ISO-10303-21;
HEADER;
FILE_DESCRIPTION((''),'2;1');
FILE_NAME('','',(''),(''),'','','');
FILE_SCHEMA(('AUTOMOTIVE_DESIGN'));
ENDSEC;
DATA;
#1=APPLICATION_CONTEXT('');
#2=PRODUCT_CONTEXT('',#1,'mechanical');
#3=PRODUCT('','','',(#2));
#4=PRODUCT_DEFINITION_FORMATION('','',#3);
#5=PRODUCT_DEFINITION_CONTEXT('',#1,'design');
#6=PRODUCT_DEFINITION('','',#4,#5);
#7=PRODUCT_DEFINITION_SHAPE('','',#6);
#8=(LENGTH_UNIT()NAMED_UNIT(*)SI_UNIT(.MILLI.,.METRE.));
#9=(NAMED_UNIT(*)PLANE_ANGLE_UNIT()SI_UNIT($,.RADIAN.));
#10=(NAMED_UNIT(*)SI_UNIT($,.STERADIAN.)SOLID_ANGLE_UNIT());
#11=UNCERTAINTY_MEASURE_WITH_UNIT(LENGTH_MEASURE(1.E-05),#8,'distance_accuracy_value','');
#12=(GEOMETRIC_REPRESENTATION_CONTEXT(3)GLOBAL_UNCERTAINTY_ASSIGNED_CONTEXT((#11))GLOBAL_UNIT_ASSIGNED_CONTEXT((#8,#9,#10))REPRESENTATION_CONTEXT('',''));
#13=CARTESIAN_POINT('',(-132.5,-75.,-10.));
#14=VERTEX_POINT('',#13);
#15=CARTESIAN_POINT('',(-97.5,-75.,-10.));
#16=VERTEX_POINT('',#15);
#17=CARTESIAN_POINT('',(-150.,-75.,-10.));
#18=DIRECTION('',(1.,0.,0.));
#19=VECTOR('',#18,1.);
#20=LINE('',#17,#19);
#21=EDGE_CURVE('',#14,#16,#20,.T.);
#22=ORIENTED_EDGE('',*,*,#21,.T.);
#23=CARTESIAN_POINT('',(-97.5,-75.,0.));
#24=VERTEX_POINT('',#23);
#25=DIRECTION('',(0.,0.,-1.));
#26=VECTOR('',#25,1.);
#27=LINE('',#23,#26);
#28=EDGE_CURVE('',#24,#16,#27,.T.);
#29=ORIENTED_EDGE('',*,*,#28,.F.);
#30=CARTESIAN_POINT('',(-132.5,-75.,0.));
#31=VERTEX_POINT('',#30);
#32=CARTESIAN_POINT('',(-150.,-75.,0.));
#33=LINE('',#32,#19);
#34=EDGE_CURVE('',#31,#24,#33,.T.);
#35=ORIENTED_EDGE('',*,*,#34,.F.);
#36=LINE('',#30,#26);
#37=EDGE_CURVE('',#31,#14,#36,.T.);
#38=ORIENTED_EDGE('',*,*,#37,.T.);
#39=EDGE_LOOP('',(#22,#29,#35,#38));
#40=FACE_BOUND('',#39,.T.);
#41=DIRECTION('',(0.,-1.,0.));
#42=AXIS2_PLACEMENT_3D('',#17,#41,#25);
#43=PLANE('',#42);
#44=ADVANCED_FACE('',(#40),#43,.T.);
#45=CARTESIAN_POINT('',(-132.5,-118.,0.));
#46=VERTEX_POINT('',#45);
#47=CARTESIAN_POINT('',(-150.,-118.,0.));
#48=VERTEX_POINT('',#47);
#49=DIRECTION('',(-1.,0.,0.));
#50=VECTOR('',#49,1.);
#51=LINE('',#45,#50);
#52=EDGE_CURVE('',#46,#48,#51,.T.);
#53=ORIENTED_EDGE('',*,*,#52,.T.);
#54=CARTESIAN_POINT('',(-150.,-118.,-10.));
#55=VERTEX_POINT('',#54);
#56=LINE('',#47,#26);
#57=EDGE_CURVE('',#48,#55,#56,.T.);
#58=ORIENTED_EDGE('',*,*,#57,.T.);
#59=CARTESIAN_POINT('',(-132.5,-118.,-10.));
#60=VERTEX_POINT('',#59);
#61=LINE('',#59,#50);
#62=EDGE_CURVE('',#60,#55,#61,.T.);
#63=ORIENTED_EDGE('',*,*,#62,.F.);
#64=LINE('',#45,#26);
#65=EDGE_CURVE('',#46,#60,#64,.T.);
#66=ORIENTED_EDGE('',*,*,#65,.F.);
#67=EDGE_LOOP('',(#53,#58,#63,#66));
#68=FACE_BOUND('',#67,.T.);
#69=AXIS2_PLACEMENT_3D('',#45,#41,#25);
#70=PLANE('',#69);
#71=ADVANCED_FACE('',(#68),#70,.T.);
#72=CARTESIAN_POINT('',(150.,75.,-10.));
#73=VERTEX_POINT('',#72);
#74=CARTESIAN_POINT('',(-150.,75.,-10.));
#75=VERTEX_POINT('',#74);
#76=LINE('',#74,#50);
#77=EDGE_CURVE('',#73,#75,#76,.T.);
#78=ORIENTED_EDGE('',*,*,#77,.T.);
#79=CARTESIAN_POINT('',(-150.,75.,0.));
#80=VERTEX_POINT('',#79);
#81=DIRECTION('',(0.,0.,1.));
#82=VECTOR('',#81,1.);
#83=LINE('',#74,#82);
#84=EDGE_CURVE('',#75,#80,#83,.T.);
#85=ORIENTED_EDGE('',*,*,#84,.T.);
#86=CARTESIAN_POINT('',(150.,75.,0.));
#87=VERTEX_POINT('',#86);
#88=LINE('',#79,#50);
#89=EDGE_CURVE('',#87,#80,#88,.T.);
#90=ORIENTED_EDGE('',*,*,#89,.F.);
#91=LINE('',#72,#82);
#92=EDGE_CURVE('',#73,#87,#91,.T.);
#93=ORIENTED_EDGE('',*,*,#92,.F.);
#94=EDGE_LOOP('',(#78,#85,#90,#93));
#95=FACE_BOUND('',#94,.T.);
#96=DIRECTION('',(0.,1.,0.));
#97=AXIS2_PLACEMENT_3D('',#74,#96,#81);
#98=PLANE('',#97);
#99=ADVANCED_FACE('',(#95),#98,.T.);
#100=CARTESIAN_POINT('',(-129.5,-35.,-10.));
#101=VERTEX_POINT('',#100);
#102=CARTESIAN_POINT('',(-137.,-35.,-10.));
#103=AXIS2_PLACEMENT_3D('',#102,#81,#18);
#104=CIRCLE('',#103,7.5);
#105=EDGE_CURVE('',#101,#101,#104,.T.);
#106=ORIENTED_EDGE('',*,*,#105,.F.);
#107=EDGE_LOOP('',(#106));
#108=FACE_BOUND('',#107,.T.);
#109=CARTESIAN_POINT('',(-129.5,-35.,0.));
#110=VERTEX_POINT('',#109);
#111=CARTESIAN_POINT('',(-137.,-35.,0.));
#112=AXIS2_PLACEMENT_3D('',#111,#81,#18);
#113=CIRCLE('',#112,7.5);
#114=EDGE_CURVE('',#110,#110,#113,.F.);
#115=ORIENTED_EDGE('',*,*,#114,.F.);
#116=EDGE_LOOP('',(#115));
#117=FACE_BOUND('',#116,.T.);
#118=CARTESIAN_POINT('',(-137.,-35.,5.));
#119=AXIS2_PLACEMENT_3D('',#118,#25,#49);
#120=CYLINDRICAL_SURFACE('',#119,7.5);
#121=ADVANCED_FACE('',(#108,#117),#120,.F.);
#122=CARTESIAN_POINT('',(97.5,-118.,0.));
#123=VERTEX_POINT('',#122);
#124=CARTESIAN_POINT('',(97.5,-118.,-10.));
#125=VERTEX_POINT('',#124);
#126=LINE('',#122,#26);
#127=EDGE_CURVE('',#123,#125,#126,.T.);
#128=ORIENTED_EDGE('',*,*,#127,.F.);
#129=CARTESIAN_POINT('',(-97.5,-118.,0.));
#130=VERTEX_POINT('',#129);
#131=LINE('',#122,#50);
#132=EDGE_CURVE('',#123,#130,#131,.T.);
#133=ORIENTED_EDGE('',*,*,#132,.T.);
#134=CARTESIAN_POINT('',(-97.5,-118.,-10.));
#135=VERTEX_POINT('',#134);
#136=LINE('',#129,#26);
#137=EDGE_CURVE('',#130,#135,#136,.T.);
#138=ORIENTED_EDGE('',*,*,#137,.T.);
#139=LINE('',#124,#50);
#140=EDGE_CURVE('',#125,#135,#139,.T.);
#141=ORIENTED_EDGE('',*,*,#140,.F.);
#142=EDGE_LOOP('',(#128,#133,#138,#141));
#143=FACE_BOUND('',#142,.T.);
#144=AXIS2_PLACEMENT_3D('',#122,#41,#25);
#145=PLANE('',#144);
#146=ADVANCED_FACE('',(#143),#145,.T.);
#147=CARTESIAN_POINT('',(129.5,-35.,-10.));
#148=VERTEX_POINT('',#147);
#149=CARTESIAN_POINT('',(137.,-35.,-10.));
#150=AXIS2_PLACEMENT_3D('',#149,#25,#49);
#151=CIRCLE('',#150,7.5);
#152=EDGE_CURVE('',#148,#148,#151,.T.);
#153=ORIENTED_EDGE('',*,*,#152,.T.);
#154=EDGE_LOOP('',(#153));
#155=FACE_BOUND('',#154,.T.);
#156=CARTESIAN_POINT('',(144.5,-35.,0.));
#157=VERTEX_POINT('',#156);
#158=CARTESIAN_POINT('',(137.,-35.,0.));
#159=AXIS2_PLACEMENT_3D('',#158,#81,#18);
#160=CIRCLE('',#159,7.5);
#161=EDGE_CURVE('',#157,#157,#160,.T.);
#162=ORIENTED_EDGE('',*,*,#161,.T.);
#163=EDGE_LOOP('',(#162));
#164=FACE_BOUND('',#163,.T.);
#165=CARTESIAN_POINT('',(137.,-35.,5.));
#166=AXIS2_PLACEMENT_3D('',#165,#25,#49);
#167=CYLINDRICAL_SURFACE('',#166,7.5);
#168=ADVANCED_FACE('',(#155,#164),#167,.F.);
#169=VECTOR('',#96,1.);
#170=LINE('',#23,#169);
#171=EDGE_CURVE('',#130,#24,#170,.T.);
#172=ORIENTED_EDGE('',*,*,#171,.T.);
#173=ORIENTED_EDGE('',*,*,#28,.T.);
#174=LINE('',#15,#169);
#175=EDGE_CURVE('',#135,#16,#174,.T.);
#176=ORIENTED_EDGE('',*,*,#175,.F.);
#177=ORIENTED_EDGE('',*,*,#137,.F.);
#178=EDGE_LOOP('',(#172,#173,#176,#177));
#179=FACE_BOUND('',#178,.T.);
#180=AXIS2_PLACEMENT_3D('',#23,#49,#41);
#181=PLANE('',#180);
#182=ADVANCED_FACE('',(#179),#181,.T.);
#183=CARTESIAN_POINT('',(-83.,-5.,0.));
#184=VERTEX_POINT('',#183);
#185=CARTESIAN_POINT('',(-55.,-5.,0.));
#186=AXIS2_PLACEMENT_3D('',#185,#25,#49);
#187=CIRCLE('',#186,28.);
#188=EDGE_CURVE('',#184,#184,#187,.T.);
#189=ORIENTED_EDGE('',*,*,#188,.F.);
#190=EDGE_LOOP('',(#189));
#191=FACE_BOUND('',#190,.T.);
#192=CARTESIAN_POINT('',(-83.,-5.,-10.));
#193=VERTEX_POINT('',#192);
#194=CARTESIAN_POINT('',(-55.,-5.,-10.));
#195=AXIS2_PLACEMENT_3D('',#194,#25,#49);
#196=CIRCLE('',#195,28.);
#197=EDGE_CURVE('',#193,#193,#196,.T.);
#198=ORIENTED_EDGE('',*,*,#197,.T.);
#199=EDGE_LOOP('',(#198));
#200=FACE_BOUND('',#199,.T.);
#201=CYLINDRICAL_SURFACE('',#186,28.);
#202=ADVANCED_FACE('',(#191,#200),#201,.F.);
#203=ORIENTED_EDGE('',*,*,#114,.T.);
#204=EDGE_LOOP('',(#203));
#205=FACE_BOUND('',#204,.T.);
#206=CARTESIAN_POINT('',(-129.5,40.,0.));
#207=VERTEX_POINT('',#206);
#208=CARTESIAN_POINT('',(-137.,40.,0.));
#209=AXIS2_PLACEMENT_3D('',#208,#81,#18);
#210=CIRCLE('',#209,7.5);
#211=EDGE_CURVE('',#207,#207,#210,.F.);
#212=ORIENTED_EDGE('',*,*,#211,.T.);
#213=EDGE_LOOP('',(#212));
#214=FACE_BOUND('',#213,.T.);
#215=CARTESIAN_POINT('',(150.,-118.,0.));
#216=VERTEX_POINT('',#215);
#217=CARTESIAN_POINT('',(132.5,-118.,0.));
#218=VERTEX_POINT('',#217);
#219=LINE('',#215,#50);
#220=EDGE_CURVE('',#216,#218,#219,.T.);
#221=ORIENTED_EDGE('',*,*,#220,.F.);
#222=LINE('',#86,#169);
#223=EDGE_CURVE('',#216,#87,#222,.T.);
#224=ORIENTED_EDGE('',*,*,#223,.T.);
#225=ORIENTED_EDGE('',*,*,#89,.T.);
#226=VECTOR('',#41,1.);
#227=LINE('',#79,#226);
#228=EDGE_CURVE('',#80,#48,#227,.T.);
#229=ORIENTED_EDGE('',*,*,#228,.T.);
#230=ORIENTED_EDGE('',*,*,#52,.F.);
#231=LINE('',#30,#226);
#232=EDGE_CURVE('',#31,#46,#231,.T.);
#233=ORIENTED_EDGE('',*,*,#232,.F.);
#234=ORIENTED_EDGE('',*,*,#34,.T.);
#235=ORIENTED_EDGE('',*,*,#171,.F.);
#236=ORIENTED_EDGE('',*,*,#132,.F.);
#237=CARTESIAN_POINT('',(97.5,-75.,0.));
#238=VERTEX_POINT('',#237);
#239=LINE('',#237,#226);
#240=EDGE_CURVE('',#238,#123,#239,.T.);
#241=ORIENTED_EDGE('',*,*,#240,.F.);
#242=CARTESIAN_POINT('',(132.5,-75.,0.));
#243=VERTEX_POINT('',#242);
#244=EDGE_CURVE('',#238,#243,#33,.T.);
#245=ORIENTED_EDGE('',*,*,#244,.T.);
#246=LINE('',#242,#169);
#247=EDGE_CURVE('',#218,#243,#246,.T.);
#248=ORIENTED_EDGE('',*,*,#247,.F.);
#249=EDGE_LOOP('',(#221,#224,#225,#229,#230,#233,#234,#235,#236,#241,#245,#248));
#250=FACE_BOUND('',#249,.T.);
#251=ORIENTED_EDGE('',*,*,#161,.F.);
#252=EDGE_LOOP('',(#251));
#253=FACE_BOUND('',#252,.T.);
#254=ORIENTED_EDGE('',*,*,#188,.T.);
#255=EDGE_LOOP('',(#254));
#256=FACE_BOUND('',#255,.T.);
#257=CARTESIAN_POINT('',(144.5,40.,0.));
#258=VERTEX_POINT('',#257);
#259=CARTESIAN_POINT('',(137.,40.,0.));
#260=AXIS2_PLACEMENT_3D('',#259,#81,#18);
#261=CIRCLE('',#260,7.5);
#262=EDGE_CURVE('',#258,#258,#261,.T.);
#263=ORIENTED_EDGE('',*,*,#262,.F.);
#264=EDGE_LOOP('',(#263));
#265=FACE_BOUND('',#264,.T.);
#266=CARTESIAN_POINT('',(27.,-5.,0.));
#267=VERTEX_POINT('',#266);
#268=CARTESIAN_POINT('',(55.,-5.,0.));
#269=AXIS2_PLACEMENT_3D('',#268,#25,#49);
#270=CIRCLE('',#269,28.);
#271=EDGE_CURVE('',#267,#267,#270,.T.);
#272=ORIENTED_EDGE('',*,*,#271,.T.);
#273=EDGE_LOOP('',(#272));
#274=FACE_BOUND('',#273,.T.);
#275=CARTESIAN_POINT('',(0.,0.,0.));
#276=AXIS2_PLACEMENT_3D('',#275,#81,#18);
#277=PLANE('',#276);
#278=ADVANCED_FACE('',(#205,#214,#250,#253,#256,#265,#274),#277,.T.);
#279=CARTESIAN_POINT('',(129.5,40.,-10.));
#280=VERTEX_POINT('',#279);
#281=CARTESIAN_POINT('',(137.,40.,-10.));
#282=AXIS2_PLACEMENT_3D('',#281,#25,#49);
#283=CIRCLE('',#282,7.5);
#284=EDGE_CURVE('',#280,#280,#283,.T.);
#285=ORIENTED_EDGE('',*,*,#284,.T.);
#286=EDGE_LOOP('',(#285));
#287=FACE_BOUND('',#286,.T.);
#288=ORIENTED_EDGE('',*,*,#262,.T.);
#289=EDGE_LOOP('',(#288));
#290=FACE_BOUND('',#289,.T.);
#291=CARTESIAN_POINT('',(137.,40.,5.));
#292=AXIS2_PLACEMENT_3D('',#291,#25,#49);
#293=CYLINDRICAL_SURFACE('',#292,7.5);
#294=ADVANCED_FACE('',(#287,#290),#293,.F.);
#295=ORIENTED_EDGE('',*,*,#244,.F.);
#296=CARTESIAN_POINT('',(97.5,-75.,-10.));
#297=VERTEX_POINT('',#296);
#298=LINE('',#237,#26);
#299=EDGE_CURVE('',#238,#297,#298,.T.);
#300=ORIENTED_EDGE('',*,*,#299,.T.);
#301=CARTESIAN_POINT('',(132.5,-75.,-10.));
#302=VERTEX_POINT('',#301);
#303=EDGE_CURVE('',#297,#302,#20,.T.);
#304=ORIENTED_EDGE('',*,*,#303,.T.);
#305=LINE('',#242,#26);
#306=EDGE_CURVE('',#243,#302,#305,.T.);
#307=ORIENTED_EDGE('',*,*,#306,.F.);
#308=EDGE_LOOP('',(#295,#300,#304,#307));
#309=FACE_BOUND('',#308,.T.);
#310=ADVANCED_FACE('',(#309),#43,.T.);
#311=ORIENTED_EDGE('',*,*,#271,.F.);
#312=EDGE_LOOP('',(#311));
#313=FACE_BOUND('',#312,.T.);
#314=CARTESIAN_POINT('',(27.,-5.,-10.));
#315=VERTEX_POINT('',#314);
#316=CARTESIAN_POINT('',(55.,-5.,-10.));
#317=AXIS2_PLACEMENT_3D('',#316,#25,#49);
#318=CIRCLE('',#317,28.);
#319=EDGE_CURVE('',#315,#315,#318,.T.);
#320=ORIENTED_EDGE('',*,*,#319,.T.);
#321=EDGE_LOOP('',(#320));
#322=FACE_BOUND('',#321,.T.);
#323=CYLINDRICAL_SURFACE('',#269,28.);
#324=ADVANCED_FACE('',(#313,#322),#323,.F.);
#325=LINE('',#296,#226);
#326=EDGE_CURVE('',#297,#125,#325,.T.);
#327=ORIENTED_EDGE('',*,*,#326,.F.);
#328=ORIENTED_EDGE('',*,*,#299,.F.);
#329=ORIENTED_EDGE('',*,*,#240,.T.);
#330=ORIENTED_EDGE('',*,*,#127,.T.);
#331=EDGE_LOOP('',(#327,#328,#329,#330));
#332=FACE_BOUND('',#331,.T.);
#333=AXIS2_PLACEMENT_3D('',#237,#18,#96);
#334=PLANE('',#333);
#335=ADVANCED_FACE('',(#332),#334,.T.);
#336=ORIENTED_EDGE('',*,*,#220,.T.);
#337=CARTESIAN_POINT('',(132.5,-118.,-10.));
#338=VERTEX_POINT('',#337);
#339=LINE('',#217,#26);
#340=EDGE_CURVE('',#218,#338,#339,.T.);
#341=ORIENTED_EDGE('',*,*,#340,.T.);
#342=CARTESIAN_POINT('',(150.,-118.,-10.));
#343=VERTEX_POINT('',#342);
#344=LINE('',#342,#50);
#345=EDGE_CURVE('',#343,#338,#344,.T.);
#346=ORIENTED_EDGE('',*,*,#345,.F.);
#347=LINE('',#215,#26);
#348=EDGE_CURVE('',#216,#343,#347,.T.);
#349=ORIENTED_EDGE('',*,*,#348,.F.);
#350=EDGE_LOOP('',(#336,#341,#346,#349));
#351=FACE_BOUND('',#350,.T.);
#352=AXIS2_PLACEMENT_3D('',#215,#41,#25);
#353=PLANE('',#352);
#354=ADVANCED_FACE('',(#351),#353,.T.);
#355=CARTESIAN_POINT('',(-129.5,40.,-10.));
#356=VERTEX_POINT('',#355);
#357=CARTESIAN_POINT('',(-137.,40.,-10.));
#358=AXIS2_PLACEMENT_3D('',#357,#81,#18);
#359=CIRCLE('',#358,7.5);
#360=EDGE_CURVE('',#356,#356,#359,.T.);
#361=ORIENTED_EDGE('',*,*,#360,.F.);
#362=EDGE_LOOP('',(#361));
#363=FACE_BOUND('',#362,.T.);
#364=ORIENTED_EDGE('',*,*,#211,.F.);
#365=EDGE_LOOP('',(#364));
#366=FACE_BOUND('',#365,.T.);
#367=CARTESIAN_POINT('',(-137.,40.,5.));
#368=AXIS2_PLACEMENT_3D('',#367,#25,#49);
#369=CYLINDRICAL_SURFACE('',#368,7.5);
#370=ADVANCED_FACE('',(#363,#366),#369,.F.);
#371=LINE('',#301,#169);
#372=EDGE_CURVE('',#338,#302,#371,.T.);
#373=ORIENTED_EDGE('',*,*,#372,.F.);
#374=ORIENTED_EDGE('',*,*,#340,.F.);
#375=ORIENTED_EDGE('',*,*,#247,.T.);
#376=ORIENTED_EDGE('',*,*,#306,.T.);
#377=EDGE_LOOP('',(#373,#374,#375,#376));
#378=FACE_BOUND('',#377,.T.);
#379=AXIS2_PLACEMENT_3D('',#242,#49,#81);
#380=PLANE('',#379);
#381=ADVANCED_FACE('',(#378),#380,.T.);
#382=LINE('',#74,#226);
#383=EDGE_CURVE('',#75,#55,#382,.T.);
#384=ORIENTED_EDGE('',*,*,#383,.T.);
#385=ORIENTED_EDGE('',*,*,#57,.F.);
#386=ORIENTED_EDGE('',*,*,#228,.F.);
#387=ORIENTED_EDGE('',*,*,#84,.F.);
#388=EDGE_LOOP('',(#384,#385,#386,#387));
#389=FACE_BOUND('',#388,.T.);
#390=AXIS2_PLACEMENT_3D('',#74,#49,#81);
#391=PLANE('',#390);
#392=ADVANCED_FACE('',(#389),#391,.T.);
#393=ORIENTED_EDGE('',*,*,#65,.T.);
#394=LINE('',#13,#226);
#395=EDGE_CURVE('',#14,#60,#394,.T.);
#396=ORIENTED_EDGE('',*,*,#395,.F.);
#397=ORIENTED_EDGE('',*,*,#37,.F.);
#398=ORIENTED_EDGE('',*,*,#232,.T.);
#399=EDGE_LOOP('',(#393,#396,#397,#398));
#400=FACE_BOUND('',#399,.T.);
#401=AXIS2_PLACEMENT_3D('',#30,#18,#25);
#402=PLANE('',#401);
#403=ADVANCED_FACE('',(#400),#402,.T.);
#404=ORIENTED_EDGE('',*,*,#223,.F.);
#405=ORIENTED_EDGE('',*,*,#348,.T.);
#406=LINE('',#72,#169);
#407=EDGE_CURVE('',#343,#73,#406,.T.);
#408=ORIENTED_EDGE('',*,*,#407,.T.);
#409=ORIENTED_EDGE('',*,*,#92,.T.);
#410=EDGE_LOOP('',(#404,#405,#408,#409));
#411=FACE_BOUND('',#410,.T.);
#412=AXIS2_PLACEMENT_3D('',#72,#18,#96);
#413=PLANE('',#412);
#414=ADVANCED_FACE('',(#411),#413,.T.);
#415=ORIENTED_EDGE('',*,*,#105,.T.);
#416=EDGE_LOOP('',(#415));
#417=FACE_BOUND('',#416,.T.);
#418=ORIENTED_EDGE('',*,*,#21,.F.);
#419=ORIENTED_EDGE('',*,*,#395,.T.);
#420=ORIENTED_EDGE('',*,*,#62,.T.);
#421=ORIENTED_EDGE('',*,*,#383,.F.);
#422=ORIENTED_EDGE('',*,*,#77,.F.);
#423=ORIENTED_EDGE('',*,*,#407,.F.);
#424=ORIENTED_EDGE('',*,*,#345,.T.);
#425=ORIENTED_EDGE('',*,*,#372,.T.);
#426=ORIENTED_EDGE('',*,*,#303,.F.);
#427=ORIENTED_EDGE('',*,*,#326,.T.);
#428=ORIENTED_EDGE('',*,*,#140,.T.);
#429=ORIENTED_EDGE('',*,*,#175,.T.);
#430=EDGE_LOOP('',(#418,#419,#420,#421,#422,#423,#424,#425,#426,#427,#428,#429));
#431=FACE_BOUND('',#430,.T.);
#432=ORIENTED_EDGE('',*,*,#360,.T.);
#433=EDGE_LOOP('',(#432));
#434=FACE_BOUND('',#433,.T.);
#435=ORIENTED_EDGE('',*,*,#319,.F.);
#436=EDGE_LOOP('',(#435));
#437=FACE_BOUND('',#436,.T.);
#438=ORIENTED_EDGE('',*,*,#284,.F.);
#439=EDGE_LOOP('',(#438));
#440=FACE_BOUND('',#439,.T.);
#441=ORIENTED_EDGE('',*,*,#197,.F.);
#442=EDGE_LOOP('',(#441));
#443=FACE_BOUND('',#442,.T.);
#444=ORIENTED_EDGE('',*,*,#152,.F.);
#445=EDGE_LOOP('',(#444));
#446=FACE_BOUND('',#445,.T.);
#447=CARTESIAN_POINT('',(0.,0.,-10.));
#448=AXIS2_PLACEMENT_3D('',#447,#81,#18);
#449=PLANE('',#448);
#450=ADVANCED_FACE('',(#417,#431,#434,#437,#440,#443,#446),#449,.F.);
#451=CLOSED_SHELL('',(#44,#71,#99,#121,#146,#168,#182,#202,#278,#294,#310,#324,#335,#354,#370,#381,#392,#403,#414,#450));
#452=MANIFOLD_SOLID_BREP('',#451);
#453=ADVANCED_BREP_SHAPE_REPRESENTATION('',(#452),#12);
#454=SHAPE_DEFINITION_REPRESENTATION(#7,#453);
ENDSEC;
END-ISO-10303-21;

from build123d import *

# Parameters (mm, degrees)
IZIM1_W               = 300
IZIM1_H               = 150
TABAN_FLAN_1_DEPTH    = 10
IZIM6_R               = 28
KES_EKSTR_ZYON1_DEPTH = 10
IZIM7_R               = 7.5
KES_EKSTR_ZYON2_DEPTH = 15
IZIM8_W               = 17.5
IZIM8_H               = 43
IZIM8_W_2             = 195
SEKME1_DEPTH          = 10


# Sheet-metal steps are written as plain solids
with BuildPart() as part:
    # Çizim1 → Taban-Flanş1 (new body)
    with BuildSketch(Plane.XY):
        Rectangle(IZIM1_W, IZIM1_H)
    extrude(amount=-TABAN_FLAN_1_DEPTH)

    # Çizim6 → Kes-Ekstrüzyon1 (cut)
    with BuildSketch(Plane(origin=(0, 0, -10), x_dir=(-1, 0, 0), z_dir=(0, 0, -1))):
        with Locations((-55, -5)):
            Circle(IZIM6_R)
        with Locations((55, -5)):
            Circle(IZIM6_R)
    extrude(amount=-KES_EKSTR_ZYON1_DEPTH, mode=Mode.SUBTRACT)

    # Çizim7 → Kes-Ekstrüzyon2 (cut)
    with BuildSketch(Plane(origin=(0, 0, -10), x_dir=(-1, 0, 0), z_dir=(0, 0, -1))):
        with Locations((-137, 40)):
            Circle(IZIM7_R)
        with Locations((-137, -35)):
            Circle(IZIM7_R)
    kes_ekstr_zyon2 = extrude(amount=-KES_EKSTR_ZYON2_DEPTH, mode=Mode.SUBTRACT)

    # Aynalama1: Kes-Ekstrüzyon2 across plane
    add(kes_ekstr_zyon2.mirror(Plane(origin=(0, 0, 0), x_dir=(0, 0, 1), z_dir=(1, 0, 0))), mode=Mode.SUBTRACT)

    # Çizim8 → Sekme1 (add)
    with BuildSketch(Plane(origin=(0, 0, -10), x_dir=(-1, 0, 0), z_dir=(0, 0, -1))):
        with Locations((-141.25, -96.5)):
            Rectangle(IZIM8_W, IZIM8_H)
        with Locations((0, -96.5)):
            Rectangle(IZIM8_W_2, IZIM8_H)
        with Locations((141.25, -96.5)):
            Rectangle(IZIM8_W, IZIM8_H)
    extrude(amount=-SEKME1_DEPTH)


solid = part.part
